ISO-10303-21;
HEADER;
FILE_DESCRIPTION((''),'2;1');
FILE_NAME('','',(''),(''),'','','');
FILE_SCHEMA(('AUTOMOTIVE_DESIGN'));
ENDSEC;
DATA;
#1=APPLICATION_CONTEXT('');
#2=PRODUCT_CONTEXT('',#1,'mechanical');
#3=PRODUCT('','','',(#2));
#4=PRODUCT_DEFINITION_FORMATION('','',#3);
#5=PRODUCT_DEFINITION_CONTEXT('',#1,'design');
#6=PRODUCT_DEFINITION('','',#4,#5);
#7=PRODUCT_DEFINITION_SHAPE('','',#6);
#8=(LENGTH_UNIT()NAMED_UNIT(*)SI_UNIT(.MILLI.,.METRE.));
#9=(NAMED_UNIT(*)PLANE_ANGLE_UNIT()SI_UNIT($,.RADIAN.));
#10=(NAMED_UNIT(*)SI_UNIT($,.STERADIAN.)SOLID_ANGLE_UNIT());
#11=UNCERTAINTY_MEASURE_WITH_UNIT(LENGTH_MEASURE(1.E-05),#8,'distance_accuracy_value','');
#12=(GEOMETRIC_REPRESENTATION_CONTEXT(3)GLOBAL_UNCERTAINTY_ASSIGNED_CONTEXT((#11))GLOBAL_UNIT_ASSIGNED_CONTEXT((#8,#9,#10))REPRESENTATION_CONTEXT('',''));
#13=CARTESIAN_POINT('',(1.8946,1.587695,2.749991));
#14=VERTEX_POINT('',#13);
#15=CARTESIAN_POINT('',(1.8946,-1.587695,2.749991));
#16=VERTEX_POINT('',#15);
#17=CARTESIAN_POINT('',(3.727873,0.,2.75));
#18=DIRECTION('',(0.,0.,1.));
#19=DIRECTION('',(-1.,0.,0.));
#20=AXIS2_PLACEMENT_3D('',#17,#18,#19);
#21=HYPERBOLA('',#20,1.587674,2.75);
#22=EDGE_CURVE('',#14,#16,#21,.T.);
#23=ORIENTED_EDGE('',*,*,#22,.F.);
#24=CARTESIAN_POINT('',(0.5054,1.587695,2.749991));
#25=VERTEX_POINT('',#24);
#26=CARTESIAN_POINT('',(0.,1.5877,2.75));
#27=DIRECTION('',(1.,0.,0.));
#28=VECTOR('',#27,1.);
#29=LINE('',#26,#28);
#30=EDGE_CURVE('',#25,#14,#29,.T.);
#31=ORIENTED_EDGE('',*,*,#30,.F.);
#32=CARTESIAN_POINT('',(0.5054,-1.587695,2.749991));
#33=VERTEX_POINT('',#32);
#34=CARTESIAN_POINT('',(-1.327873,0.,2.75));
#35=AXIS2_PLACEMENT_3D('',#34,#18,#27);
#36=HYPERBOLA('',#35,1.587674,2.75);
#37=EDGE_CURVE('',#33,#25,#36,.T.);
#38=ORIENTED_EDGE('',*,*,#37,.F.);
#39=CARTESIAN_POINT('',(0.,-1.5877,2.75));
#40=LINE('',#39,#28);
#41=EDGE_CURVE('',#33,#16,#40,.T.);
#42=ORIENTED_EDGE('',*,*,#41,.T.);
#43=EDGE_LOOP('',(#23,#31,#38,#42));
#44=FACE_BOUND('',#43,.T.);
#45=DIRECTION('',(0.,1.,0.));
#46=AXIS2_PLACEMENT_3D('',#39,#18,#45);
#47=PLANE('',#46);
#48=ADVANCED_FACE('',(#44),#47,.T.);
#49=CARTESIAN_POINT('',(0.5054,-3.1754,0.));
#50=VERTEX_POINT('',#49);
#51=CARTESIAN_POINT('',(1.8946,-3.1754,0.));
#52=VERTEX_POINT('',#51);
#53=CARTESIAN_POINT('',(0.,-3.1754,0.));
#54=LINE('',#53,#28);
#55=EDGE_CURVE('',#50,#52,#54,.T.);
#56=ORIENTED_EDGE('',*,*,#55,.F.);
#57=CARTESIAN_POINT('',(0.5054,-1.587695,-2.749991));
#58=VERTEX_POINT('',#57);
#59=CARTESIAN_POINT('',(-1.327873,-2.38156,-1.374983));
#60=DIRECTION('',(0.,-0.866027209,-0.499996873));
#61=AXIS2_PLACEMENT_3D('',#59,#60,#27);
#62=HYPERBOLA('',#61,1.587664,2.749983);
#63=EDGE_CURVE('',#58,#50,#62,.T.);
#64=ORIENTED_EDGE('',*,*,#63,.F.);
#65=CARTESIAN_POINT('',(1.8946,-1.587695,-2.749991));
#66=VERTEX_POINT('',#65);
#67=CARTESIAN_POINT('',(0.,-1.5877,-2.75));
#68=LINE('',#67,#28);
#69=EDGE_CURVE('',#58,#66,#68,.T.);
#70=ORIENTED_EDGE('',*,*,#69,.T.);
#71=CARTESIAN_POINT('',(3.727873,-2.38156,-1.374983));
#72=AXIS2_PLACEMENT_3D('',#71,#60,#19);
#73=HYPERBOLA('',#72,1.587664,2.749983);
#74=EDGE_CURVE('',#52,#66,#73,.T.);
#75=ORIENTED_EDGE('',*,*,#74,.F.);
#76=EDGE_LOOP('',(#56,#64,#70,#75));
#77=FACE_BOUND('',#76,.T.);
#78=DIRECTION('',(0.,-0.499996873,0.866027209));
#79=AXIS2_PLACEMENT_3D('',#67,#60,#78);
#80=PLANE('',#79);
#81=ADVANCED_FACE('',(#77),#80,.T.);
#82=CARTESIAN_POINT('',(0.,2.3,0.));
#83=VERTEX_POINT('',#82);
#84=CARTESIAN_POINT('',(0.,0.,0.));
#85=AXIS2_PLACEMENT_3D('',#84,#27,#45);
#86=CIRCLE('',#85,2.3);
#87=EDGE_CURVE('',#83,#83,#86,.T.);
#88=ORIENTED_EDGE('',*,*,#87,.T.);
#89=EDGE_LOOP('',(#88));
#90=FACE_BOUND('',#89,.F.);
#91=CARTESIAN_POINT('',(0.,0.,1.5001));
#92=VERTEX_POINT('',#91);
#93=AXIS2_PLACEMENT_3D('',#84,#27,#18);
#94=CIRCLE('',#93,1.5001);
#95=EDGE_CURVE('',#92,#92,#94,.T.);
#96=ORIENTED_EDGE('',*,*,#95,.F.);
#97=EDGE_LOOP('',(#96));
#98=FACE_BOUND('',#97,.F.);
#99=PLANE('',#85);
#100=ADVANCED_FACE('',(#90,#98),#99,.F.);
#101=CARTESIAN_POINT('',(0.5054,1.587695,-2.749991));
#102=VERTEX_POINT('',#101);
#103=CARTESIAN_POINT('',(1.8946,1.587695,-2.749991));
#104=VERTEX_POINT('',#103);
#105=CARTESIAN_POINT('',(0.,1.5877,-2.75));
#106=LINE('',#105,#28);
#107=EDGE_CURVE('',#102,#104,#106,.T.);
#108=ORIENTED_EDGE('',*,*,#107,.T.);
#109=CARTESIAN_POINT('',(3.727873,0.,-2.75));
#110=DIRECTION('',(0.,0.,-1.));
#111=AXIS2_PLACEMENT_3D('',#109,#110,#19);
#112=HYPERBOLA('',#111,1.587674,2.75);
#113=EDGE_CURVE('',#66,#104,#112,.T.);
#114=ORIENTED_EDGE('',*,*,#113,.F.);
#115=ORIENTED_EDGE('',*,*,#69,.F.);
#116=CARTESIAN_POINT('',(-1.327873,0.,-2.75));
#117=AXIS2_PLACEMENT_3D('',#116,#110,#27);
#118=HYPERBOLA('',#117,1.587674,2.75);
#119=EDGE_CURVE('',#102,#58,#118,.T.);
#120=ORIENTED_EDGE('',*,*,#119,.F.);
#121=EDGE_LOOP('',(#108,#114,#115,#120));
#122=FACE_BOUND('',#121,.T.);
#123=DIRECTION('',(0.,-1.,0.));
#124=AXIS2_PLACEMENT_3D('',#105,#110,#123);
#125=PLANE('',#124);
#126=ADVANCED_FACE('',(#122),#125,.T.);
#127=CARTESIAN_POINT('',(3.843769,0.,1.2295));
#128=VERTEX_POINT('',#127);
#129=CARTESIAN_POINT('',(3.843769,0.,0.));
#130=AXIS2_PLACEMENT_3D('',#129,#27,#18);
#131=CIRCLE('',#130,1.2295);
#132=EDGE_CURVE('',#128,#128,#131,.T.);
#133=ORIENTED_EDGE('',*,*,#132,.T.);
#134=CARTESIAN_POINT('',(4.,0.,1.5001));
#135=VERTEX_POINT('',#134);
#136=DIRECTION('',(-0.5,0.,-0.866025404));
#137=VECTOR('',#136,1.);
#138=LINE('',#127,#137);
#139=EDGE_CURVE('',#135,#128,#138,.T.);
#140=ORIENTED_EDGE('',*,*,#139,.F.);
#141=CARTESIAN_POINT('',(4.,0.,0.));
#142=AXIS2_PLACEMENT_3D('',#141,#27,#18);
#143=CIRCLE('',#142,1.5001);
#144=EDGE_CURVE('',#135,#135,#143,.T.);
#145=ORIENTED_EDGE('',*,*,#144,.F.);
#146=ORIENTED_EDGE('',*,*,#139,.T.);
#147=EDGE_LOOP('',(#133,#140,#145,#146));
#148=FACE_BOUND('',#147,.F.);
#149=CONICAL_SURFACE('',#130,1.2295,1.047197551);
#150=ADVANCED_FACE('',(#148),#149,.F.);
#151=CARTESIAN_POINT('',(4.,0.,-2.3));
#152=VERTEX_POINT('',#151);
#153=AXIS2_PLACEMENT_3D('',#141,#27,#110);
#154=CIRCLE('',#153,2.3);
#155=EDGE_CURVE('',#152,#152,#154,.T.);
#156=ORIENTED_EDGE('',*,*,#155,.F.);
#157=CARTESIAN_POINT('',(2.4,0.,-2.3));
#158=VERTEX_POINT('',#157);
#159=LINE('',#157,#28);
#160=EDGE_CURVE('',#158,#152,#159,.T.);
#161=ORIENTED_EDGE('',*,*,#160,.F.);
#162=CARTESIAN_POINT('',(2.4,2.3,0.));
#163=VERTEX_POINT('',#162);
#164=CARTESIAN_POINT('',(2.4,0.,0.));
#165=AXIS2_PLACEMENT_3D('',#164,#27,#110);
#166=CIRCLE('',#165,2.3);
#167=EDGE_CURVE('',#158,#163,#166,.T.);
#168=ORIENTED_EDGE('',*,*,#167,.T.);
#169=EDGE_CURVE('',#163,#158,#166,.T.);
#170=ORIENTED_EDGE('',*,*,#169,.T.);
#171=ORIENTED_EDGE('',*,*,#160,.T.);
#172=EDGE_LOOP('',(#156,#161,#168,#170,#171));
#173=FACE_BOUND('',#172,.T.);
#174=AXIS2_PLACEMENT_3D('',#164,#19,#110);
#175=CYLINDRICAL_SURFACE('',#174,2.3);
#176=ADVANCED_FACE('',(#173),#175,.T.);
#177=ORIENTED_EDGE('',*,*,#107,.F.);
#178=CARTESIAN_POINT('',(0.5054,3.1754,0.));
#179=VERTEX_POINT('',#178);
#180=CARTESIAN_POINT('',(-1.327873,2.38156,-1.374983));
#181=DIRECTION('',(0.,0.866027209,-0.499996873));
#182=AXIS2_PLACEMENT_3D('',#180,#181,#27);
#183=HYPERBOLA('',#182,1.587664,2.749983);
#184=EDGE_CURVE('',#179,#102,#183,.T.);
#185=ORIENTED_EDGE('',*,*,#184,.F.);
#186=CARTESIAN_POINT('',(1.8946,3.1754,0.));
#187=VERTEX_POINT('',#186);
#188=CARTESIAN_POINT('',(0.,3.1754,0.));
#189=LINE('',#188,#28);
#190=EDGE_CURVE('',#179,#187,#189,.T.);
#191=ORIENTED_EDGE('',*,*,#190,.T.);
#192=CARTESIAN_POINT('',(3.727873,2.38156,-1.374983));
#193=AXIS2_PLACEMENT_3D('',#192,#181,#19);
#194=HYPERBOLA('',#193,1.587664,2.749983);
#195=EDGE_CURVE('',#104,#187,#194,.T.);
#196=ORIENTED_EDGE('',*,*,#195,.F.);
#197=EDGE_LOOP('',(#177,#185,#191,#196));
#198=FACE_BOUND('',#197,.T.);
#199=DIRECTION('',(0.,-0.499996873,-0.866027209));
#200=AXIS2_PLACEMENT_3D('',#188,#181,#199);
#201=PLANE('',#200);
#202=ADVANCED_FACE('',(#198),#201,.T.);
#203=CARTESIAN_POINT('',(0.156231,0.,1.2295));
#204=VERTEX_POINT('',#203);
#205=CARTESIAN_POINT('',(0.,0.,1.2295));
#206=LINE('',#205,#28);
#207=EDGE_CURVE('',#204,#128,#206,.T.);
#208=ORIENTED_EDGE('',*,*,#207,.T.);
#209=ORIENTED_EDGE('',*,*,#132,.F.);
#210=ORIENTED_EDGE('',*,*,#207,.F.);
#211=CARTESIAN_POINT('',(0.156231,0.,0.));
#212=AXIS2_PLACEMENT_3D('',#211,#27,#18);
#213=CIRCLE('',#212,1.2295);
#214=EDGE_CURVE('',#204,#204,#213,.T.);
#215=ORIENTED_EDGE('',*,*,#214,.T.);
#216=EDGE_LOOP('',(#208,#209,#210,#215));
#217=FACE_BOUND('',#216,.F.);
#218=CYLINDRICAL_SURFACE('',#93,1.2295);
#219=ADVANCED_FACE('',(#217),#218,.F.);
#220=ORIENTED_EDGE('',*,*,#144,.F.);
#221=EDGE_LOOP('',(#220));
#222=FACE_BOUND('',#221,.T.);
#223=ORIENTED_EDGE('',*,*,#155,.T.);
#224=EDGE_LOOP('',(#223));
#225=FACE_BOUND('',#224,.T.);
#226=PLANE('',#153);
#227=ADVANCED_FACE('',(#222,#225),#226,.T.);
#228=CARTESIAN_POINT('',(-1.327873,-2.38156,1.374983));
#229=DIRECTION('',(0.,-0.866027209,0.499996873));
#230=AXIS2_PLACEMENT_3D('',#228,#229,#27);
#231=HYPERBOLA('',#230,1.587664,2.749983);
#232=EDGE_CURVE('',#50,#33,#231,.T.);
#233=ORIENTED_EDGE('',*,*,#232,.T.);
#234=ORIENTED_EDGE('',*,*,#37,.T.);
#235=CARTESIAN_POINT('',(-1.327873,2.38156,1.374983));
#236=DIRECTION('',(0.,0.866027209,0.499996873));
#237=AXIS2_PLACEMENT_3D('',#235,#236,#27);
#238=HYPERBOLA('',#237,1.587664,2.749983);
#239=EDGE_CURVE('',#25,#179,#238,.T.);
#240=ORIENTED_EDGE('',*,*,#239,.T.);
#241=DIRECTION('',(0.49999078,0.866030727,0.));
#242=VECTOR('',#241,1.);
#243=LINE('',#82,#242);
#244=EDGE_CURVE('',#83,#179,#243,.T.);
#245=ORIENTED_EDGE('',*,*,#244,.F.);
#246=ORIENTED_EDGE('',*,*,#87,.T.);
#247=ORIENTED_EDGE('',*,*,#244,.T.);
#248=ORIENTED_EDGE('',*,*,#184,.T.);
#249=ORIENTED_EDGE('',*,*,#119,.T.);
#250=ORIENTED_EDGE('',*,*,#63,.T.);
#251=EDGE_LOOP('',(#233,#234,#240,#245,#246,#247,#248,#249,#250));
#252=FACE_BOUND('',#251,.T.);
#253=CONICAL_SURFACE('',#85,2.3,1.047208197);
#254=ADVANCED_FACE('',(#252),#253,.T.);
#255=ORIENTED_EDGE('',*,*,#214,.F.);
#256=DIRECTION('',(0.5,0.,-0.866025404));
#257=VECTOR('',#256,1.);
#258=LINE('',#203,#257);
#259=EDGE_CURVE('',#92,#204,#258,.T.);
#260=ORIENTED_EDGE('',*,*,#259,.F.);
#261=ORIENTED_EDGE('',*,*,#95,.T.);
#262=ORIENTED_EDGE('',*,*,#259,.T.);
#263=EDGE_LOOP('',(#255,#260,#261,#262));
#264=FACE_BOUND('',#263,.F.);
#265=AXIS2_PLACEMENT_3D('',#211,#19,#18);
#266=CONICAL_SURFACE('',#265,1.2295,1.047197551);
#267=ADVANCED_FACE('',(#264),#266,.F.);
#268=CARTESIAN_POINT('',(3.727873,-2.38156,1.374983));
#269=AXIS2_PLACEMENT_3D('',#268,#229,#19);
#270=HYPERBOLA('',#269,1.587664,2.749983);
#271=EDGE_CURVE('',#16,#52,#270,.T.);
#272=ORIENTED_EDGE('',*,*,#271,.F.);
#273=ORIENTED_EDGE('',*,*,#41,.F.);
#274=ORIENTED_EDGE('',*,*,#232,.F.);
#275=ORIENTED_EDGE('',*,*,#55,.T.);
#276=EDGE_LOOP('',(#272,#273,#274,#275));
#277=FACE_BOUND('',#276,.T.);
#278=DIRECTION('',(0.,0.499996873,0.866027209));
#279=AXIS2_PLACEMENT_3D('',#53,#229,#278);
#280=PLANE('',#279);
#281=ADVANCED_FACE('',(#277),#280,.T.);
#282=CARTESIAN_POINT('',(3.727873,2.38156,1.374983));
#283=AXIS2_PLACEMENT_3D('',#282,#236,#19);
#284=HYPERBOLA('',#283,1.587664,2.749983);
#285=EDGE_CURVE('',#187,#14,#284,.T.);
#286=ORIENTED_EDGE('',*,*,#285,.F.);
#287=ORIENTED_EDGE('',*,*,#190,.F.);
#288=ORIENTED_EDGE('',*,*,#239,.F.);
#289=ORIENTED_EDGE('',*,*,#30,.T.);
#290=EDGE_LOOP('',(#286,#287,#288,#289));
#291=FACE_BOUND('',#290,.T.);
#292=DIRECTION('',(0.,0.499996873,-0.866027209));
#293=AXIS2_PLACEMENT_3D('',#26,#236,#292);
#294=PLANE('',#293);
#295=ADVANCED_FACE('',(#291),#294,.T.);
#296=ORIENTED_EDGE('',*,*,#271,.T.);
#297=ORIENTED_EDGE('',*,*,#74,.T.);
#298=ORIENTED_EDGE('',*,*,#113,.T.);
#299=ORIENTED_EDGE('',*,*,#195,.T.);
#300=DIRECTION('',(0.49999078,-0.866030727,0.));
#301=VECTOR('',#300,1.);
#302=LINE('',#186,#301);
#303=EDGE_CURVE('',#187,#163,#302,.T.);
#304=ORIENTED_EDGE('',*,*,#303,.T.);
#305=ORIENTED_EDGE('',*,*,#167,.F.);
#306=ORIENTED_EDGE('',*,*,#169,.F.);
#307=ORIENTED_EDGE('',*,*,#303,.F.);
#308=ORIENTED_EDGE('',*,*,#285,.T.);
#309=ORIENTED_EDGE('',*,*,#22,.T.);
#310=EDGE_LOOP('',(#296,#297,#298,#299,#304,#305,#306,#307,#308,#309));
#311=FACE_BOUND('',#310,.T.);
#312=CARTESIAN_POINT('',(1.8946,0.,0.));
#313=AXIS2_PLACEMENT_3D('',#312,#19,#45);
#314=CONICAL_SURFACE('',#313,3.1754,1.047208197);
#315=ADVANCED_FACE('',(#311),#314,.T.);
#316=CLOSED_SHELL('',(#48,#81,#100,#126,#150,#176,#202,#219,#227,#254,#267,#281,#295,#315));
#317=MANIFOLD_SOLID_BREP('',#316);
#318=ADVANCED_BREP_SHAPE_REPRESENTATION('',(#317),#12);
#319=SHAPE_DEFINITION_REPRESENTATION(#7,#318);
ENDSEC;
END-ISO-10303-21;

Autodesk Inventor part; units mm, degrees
ref_plane "YZ Plane" through (0, 0, 0) normal (1, 0, 0) x (0, 1, 0)
ref_plane "XZ Plane" through (0, 0, 0) normal (0, 1, 0) x (-1, 0, 0)
sketch "Sketch1" plane through (0, 0, 0) normal (1, 0, 0) x (0, 1, 0)
  line L0 (1.5877, -2.75) -> (-1.5877, -2.75)
  line L1 (-1.5877, -2.75) -> (-3.1754, 0)
  line L2 (-3.1754, 0) -> (-1.5877, 2.75)
  line L3 (-1.5877, 2.75) -> (1.5877, 2.75)
  line L4 (1.5877, 2.75) -> (3.1754, 0)
  line L5 (3.1754, 0) -> (1.5877, -2.75)
  point P0 (0, 0)
  point P1 (0, 0)
  dimension "d0" = 6.3509
extrude "Body" add sketch "Sketch1" along normal blind 2.4
sketch "Sketch2" plane through (2.4, 0, 0) normal (1, 0, 0) x (0, 0, -1)
  circle A0 centre (0, 0) radius 2.3
  dimension "d7" = 4.6
extrude "Ring" add sketch "Sketch2" along normal blind 1.6
sketch "Sketch3" plane through (0, 0, 0) normal (0, 0, 1) x (1, 0, 0)
  line L0 (0, 1.5877) -> (0, 3.1754) projected
  line L1 (0, 3.1754) -> (2.4, 3.1754) projected
  line L2 (2.4, 1.5877) -> (2.4, 3.1754) projected
  line L3 (-0.48, 0) -> (2.88, 0) projected
  line L4 (0, 2.3) -> (0.5054, 3.1754)
  line L5 (1.8946, 3.1754) -> (2.4, 2.3)
  dimension "d3" = 30
  dimension "d4" = 30
  dimension "d5" = 4.6
  dimension "d6" = 4.6
revolve "Chamfer1" cut sketch "Sketch3" angle 360 about axis through (-10, 0, 0) along (1, 0, 0)
sketch "Sketch4" plane through (0, 0, 0) normal (-1, 0, 0) x (0, 0, 1)
  line L0 (0, -4.4456) -> (0, 4.4456) projected
  line L1 (-3.85, 0) -> (3.85, 0) projected
  point P0 (0, 0)
hole "Thread" at (0, 0, 0) direction (1, 0, 0) diameter 2.459 end through all thread size "M3x0.5" class "6H" standard "ISO Metric profile"
chamfer "Chamfer2" distance 0.2706 angle 30 1 edges at (0, 0, -1.2295) measured on face at (0, 1.9179, -0.2329)
chamfer "Chamfer3" distance 0.2706 angle 30 1 edges at (4, 0, -1.2295) measured on face at (4, -0.2816, -1.909)
ref_plane "Work Plane1" through (9.305, 0, 0) normal (0, 0, 1) x (-1, 0, 0)
equation "\"d0\" = 1.1547 * SW"
equation "\"d1\" = KOH1"
equation "\"d7\" = SD2"
equation "\"d8\" = KOH - KOH1"
equation "\"d10\" = -0.5 * GD1 + 0.5 * NND"
equation "\"d46\" = -0.5 * GD1 + 0.5 * NND"
equation "\"d12\" = -0.5 * GD1 + 0.5 * NND"
equation "\"d47\" = -0.5 * GD1 + 0.5 * NND"
equation "\"d3\" = ANG1"
equation "\"d4\" = ANG2"
equation "\"d5\" = SW0"
equation "\"d6\" = SW01"
equation "\"ANG1\" = 30deg"
equation "\"ANG2\" = 30deg"
equation "\"NND\" = 3"
equation "\"KOH1\" = 2.4"
equation "\"KOH\" = 4"
equation "\"SW\" = 5.5"
equation "\"SW0\" = 4.6"
equation "\"SW01\" = SW0"
equation "\"SD2\" = SW0"
equation "\"GUL\" = 0.541266 * PTC"
equation "\"THREADDIA\" = 3"
equation "\"TOA\" = 30deg"
equation "\"PTC\" = 0.5"
equation "\"GAL\" = 0.541266 * PTC"
equation "\"E0\" = 1.155 * SW"
equation "\"GD1\" = 2.458734"
properties part number "DIN 985 - M3" material "Steel, Mild"
